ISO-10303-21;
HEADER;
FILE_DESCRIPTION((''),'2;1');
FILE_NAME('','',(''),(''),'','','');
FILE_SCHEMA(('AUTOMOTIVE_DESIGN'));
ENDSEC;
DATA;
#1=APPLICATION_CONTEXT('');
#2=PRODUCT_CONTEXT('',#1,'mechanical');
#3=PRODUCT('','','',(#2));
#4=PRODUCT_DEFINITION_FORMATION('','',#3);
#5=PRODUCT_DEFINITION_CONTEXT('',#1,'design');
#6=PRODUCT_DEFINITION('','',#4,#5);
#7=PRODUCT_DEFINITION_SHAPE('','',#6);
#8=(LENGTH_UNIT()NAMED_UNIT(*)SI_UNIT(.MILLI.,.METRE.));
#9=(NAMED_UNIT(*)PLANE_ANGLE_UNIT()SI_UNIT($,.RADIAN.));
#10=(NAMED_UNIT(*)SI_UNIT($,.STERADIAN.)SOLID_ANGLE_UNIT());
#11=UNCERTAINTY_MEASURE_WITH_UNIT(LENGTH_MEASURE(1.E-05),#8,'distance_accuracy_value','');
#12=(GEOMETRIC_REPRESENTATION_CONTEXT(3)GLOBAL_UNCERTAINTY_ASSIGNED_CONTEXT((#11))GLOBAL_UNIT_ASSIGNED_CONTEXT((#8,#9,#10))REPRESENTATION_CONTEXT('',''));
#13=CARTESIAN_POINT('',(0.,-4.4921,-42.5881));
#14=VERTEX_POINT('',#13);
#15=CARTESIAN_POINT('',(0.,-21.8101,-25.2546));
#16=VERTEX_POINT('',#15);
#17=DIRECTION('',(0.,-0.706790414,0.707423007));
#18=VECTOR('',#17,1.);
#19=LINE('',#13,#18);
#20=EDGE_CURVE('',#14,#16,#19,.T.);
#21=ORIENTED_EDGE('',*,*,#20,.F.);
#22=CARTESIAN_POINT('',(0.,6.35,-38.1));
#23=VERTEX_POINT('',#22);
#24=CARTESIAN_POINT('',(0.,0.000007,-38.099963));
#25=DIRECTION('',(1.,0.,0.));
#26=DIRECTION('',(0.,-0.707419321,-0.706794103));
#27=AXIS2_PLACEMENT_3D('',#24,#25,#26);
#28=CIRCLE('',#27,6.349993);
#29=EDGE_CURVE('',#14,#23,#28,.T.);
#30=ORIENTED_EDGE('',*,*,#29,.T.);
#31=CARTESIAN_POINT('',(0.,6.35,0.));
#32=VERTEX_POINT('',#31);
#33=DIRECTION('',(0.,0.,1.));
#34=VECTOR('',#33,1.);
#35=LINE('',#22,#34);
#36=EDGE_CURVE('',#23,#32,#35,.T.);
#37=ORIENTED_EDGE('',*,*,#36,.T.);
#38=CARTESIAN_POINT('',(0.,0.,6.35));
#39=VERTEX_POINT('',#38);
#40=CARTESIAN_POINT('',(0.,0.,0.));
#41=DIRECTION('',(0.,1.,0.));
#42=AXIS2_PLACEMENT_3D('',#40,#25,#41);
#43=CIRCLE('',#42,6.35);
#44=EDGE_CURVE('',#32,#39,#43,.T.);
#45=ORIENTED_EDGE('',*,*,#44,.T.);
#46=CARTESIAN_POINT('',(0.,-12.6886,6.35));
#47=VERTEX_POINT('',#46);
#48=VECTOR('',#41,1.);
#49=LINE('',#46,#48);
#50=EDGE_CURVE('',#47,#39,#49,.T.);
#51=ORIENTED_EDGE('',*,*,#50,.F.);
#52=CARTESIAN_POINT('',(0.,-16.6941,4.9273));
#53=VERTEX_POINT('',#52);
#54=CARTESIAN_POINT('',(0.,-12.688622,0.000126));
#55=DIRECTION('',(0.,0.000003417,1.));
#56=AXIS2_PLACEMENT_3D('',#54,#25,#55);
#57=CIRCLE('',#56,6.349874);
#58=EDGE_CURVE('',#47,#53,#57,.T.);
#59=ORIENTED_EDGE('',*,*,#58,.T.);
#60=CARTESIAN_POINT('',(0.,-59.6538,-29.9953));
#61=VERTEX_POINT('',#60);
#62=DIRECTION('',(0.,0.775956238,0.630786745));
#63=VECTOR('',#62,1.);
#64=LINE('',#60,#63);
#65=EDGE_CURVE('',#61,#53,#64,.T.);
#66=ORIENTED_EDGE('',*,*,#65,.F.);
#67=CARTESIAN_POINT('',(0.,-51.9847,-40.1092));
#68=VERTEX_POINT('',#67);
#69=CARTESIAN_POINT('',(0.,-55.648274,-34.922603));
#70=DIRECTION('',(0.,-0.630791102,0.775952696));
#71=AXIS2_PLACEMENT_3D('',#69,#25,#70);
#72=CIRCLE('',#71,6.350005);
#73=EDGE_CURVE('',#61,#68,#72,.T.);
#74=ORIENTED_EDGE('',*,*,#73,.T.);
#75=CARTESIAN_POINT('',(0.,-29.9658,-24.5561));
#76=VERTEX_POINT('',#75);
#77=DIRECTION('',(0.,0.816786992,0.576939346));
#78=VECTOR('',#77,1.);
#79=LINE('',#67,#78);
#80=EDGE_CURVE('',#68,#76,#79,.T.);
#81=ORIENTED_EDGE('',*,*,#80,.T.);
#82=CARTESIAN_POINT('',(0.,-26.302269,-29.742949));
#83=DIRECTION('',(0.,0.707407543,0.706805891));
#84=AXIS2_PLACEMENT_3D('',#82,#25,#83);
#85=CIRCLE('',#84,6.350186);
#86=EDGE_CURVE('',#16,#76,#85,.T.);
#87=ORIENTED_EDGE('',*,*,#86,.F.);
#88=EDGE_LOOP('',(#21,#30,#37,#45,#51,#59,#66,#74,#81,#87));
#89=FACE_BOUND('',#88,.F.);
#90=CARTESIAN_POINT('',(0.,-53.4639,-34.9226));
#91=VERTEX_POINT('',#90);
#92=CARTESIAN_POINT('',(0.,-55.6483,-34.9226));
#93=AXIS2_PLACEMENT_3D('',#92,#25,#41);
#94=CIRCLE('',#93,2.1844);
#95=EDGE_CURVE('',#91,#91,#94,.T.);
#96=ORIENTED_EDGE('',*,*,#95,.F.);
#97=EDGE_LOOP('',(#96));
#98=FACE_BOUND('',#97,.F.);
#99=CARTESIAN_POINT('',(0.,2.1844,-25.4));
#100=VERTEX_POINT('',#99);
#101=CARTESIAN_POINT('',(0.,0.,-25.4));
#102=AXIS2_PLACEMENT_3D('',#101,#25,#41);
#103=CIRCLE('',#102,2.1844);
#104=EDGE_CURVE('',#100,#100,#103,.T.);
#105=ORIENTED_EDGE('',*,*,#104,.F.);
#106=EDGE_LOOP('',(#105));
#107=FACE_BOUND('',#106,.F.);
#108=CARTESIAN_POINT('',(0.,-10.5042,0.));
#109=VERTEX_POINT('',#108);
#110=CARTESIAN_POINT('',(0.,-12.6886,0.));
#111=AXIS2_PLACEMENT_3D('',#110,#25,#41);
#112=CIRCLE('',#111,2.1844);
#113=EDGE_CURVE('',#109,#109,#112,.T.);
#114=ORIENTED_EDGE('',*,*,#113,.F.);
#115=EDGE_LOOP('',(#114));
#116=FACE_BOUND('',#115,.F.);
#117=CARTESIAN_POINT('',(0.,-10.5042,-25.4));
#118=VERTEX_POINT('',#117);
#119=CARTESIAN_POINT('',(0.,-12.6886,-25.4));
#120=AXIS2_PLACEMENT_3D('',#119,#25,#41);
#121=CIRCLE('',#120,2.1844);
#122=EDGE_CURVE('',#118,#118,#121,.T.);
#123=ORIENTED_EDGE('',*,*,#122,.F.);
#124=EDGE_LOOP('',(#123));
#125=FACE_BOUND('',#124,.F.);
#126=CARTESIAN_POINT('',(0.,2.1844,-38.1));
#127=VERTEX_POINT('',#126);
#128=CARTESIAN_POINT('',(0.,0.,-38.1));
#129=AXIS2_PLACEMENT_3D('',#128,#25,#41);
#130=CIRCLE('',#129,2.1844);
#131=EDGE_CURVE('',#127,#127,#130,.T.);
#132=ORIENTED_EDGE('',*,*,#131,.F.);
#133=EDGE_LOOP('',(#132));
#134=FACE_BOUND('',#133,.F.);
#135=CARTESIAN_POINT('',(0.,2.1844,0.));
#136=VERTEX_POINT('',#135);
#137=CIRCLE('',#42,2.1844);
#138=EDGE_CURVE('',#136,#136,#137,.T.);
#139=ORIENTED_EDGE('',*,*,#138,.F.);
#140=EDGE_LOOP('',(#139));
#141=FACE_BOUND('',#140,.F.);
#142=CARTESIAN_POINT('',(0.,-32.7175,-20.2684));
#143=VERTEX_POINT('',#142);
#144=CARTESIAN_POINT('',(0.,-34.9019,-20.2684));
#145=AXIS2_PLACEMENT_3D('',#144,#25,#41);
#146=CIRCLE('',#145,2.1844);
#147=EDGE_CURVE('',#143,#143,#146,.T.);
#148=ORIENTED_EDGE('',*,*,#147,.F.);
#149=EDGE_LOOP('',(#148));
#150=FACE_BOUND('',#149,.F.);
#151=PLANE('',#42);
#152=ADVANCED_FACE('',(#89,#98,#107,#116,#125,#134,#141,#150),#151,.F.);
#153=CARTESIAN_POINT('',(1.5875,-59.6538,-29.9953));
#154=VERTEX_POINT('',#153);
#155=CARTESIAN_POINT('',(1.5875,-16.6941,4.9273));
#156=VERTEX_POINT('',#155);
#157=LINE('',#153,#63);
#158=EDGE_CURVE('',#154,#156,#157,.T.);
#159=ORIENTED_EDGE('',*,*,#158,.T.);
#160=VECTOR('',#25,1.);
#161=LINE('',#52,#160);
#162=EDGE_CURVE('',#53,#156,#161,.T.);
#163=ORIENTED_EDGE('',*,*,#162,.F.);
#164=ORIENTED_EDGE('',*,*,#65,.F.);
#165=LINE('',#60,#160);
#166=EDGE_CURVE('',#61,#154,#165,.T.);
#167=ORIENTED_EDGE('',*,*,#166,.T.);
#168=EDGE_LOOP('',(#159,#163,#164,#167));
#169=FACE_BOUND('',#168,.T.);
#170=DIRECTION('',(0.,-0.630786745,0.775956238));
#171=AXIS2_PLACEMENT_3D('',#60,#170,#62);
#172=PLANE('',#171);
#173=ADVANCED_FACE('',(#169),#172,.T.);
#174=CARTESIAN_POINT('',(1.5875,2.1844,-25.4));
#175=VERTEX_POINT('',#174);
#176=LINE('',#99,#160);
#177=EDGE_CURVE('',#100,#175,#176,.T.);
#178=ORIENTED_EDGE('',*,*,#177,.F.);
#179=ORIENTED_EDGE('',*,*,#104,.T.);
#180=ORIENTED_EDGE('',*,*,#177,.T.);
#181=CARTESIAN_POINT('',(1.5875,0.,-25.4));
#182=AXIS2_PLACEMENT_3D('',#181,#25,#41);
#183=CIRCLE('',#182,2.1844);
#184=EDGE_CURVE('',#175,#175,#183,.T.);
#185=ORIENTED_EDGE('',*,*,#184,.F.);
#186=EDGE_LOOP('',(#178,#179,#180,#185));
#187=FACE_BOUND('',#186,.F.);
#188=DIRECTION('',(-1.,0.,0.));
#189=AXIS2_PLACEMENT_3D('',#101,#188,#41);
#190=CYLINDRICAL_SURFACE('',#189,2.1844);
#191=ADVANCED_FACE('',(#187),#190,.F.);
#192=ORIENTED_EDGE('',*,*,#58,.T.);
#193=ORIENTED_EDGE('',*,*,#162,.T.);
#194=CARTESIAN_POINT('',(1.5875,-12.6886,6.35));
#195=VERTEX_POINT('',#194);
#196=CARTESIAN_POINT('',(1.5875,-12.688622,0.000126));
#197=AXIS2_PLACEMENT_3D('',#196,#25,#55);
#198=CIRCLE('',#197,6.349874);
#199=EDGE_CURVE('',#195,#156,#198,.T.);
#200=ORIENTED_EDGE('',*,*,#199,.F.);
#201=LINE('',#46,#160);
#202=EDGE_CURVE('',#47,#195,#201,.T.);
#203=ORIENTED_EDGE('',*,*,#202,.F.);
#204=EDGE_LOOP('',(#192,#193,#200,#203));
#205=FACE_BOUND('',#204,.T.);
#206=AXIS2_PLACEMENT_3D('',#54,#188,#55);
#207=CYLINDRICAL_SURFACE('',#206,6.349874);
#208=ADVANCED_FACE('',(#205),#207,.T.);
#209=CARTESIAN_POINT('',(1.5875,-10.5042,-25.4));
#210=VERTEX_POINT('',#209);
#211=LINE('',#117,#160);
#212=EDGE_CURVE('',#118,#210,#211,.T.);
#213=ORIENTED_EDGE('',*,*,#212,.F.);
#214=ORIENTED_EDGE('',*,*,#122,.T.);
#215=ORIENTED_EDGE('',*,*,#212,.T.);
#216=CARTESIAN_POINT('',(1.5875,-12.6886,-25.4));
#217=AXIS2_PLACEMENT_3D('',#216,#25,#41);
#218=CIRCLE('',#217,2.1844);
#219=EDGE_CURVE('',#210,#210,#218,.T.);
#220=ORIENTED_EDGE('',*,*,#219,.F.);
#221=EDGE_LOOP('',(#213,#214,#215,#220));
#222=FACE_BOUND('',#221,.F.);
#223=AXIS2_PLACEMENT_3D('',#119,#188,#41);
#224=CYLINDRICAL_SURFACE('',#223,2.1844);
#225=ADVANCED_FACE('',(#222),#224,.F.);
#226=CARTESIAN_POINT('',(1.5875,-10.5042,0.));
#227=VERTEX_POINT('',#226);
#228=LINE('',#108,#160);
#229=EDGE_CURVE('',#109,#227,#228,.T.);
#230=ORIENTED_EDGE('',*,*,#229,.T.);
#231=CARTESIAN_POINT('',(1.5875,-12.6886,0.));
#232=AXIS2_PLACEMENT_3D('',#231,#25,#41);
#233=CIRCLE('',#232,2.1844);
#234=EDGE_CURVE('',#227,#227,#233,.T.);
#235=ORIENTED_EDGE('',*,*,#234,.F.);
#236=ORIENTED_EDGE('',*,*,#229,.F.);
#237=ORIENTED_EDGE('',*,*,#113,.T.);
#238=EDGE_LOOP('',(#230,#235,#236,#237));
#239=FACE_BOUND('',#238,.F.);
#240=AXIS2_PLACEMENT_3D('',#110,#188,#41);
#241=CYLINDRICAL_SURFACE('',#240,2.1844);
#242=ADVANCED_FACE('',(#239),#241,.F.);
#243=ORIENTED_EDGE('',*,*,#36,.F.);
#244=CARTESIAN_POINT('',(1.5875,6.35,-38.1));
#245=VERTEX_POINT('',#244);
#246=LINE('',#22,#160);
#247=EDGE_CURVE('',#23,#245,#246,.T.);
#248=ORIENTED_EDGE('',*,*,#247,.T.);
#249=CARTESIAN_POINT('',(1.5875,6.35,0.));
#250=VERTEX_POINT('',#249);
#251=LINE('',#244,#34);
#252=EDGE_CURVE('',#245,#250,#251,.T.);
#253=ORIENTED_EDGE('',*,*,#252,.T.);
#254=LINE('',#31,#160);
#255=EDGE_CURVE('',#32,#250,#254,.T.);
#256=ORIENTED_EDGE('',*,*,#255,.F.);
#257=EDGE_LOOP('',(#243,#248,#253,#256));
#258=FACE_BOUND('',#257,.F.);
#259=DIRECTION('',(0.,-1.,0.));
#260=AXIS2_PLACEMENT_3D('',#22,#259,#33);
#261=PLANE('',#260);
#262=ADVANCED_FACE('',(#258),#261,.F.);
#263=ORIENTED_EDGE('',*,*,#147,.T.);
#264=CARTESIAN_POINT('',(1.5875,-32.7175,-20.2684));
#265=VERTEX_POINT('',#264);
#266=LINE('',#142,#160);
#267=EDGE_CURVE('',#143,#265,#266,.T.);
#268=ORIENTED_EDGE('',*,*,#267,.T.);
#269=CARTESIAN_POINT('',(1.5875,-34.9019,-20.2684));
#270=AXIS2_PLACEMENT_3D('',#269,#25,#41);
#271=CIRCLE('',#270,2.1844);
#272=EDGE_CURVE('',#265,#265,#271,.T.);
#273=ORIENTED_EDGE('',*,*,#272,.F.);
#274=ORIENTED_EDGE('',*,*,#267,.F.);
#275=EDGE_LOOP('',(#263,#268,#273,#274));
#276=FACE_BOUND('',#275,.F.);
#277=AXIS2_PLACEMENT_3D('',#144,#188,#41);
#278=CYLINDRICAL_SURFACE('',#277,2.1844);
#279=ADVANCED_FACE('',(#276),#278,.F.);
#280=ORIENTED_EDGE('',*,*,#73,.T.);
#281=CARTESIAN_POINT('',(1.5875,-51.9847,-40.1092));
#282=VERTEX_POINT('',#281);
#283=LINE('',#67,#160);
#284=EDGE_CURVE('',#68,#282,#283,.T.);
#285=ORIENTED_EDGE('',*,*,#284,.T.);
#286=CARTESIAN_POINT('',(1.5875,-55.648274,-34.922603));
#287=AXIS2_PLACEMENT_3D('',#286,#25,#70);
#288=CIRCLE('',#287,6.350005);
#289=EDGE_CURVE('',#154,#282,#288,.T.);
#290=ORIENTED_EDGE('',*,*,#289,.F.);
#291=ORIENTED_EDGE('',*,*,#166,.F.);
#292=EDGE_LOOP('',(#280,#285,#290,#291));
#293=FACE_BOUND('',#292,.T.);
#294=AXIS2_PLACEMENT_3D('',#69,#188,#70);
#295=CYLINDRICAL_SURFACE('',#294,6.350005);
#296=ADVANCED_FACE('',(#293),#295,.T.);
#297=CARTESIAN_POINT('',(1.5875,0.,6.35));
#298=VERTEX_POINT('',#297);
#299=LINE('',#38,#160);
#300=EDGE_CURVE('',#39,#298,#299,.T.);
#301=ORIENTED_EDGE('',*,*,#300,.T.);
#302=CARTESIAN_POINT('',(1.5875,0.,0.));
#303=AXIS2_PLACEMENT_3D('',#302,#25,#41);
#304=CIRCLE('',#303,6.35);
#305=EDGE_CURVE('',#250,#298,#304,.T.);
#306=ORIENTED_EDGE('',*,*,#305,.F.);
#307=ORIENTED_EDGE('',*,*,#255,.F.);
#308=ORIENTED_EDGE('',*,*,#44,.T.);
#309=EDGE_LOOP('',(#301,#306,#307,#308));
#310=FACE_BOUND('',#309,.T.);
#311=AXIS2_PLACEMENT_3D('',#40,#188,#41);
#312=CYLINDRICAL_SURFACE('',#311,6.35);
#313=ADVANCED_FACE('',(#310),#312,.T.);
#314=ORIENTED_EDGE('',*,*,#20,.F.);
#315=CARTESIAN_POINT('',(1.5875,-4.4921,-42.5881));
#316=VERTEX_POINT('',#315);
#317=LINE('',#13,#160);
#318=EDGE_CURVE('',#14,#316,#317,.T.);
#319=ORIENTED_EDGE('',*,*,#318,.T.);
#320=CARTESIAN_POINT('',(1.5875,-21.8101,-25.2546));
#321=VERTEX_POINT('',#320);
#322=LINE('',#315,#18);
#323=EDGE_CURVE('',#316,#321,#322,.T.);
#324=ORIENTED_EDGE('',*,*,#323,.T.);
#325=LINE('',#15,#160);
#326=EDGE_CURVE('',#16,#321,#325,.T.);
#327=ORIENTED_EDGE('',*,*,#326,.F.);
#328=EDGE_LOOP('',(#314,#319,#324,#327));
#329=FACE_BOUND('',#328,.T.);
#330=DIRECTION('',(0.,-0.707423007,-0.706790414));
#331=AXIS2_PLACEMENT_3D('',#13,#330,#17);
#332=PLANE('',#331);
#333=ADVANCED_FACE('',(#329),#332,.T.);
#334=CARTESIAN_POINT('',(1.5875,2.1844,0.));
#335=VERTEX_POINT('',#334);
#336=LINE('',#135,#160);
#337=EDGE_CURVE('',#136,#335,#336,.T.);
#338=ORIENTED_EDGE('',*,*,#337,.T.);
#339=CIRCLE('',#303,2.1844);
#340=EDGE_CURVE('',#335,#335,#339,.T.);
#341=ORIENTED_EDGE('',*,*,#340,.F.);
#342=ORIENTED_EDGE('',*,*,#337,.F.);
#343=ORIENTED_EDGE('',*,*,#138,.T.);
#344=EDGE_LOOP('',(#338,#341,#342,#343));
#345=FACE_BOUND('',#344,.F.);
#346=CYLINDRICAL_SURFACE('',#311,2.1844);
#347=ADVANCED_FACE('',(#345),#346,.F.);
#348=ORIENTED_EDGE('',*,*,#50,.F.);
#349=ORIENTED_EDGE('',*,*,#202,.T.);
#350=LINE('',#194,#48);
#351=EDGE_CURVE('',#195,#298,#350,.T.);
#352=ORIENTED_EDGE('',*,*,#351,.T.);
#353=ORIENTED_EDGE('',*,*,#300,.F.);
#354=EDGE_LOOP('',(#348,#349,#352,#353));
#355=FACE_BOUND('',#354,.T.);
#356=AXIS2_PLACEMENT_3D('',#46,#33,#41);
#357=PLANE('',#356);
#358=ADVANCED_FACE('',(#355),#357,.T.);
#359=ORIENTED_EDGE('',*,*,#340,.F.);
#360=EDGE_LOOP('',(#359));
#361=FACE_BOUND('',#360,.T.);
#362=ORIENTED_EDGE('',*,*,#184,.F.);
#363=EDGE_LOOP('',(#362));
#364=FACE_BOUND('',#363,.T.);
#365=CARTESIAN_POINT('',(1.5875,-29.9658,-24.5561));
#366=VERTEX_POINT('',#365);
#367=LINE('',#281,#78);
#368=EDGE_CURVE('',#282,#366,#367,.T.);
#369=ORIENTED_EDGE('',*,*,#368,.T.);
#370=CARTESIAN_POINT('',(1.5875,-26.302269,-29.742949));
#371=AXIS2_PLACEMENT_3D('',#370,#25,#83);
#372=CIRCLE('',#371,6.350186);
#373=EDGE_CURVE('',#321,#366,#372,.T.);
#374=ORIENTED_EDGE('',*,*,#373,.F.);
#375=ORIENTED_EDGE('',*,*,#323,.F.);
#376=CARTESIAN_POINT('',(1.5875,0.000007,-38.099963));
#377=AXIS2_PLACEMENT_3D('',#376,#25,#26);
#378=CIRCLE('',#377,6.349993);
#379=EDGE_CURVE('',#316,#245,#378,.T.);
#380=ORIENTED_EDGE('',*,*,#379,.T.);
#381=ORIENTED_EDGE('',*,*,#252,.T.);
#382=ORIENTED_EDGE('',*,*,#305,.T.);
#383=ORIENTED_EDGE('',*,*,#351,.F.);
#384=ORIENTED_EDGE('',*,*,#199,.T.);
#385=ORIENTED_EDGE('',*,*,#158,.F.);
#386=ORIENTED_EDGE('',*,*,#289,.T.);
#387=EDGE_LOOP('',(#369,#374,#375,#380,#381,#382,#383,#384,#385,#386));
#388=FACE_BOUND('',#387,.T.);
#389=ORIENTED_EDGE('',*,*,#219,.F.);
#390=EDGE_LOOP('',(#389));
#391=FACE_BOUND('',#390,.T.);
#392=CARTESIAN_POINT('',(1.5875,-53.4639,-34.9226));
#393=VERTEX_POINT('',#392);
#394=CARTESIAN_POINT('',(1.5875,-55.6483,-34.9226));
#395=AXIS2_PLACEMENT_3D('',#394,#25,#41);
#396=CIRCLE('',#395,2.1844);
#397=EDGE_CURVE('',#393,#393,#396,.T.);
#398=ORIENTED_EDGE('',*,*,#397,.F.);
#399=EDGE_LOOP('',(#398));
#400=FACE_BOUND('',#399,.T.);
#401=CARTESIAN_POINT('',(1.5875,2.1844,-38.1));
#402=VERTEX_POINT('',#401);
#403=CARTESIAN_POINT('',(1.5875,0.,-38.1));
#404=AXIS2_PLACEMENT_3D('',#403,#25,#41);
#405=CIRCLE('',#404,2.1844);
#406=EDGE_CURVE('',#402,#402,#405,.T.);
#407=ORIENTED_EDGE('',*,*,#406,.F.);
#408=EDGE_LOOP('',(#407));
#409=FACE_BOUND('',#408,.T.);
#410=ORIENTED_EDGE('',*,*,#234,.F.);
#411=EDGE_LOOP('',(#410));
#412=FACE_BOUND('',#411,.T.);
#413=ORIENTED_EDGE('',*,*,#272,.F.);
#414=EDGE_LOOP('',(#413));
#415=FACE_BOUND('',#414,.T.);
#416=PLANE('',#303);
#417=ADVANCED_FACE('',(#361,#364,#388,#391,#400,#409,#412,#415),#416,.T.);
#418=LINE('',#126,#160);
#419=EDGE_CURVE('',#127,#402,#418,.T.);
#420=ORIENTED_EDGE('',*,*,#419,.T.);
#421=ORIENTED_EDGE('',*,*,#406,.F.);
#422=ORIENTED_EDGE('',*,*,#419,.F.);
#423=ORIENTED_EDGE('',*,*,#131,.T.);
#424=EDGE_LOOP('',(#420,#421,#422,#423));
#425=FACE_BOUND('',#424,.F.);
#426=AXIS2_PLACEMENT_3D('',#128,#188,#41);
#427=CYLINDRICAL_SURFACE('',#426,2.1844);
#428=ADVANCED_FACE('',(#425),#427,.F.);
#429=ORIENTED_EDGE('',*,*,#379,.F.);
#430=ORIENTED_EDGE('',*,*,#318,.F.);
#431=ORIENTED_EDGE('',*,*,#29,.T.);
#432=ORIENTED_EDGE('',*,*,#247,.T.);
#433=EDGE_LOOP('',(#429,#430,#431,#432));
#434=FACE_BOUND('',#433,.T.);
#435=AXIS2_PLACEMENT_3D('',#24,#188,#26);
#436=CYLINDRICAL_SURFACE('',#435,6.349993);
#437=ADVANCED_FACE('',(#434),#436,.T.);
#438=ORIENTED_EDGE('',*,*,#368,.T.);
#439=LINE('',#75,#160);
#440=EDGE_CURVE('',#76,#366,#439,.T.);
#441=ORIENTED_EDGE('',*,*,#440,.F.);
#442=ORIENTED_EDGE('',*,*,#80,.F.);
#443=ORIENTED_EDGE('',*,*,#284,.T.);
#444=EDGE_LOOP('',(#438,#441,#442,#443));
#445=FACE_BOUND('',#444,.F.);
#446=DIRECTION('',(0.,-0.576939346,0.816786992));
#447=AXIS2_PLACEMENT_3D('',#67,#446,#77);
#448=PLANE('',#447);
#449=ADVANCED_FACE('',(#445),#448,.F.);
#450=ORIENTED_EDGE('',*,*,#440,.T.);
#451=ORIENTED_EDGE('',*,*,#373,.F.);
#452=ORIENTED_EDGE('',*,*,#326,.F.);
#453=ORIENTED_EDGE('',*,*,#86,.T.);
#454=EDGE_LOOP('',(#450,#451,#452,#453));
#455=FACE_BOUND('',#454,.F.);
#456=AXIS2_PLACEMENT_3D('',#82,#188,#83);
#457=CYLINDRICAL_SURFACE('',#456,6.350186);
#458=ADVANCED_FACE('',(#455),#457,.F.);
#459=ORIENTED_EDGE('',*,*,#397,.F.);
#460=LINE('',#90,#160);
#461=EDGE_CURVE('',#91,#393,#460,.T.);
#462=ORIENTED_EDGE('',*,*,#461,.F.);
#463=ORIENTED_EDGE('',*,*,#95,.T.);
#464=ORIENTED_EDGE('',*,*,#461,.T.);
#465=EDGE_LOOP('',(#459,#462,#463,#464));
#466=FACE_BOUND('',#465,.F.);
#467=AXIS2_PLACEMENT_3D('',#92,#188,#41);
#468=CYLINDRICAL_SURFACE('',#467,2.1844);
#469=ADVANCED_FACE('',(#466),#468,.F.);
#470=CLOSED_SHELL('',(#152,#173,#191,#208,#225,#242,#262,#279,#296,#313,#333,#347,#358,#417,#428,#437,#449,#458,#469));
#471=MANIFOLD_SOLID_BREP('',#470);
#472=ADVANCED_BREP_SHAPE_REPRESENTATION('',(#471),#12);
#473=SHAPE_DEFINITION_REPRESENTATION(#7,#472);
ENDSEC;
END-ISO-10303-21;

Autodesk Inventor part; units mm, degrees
ref_plane "YZ Plane" through (0, 0, 0) normal (1, 0, 0) x (0, 1, 0)
ref_plane "XZ Plane" through (0, 0, 0) normal (0, 1, 0) x (-1, 0, 0)
ref_plane "XY Plane" through (0, 0, 0) normal (0, 0, 1) x (1, 0, 0)
sketch "maiin" plane through (0, 0, 0) normal (0, 0, 1) x (1, 0, 0)
  arc A0 (6.5899, -1.511) -> (-1.5658, -0.8125) centre (2.0978, -5.9991) ccw
  circle A1 centre (-6.5018, 3.4753) radius 2.1844
  line L0 (-31.2537, -6.2516) -> (11.7059, 28.671)
  line L1 (-23.5847, -16.3655) -> (-1.5658, -0.8125)
  circle A2 centre (-27.2482, -11.1789) radius 2.1844
  arc A3 (-31.2537, -6.2516) -> (-23.5847, -16.3655) centre (-27.2482, -11.1789) ccw
  circle A4 centre (28.4, -14.3563) radius 2.1844
  line L2 (34.75, -14.3563) -> (34.75, 23.7437)
  line L3 (15.7114, 30.0937) -> (28.4, 30.0937)
  circle A5 centre (28.4, 23.7437) radius 2.1844
  circle A6 centre (28.4, -1.6563) radius 2.1844
  arc A7 (23.9079, -18.8444) -> (34.75, -14.3563) centre (28.4, -14.3563) ccw
  line L4 (23.9079, -18.8444) -> (6.5899, -1.511)
  circle A8 centre (15.7114, 23.7437) radius 2.1844
  circle A9 centre (15.7114, -1.6563) radius 2.1844
  arc A10 (34.75, 23.7437) -> (28.4, 30.0937) centre (28.4, 23.7437) ccw
  arc A11 (15.7114, 30.0937) -> (11.7059, 28.671) centre (15.7114, 23.7437) ccw
  point P0 (10.0881, 4.3711)
  dimension "d0" = 12.7
  dimension "d1" = 12.7
  dimension "d4" = 6.35
  dimension "d6" = 4.3688
sketch "Sketch1" plane through (0, 0, 0) normal (1, 0, 0) x (0, 1, 0)
  arc A0 (-21.8101, -25.2546) -> (-29.9658, -24.5561) centre (-26.3022, -29.7428) ccw
  circle A1 centre (-34.9019, -20.2684) radius 2.1844
  line L0 (-59.6538, -29.9953) -> (-16.6941, 4.9273)
  line L1 (-51.9847, -40.1092) -> (-29.9658, -24.5561)
  circle A2 centre (-55.6483, -34.9226) radius 2.1844
  arc A3 (-59.6538, -29.9953) -> (-51.9847, -40.1092) centre (-55.6483, -34.9226) ccw
  circle A4 centre (0, -38.1) radius 2.1844
  line L2 (6.35, -38.1) -> (6.35, 0)
  line L3 (-12.6886, 6.35) -> (0, 6.35)
  circle A5 centre (0, 0) radius 2.1844
  circle A6 centre (0, -25.4) radius 2.1844
  arc A7 (-4.4921, -42.5881) -> (6.35, -38.1) centre (0, -38.1) ccw
  line L4 (-4.4921, -42.5881) -> (-21.8101, -25.2546)
  circle A8 centre (-12.6886, 0) radius 2.1844
  circle A9 centre (-12.6886, -25.4) radius 2.1844
  arc A10 (6.35, 0) -> (0, 6.35) centre (0, 0) ccw
  arc A11 (-12.6886, 6.35) -> (-16.6941, 4.9273) centre (-12.6886, 0) ccw
extrude "Extrusion1" add sketch "Sketch1" along normal blind 1.5875
properties part number "triangle_brace_gusset"
